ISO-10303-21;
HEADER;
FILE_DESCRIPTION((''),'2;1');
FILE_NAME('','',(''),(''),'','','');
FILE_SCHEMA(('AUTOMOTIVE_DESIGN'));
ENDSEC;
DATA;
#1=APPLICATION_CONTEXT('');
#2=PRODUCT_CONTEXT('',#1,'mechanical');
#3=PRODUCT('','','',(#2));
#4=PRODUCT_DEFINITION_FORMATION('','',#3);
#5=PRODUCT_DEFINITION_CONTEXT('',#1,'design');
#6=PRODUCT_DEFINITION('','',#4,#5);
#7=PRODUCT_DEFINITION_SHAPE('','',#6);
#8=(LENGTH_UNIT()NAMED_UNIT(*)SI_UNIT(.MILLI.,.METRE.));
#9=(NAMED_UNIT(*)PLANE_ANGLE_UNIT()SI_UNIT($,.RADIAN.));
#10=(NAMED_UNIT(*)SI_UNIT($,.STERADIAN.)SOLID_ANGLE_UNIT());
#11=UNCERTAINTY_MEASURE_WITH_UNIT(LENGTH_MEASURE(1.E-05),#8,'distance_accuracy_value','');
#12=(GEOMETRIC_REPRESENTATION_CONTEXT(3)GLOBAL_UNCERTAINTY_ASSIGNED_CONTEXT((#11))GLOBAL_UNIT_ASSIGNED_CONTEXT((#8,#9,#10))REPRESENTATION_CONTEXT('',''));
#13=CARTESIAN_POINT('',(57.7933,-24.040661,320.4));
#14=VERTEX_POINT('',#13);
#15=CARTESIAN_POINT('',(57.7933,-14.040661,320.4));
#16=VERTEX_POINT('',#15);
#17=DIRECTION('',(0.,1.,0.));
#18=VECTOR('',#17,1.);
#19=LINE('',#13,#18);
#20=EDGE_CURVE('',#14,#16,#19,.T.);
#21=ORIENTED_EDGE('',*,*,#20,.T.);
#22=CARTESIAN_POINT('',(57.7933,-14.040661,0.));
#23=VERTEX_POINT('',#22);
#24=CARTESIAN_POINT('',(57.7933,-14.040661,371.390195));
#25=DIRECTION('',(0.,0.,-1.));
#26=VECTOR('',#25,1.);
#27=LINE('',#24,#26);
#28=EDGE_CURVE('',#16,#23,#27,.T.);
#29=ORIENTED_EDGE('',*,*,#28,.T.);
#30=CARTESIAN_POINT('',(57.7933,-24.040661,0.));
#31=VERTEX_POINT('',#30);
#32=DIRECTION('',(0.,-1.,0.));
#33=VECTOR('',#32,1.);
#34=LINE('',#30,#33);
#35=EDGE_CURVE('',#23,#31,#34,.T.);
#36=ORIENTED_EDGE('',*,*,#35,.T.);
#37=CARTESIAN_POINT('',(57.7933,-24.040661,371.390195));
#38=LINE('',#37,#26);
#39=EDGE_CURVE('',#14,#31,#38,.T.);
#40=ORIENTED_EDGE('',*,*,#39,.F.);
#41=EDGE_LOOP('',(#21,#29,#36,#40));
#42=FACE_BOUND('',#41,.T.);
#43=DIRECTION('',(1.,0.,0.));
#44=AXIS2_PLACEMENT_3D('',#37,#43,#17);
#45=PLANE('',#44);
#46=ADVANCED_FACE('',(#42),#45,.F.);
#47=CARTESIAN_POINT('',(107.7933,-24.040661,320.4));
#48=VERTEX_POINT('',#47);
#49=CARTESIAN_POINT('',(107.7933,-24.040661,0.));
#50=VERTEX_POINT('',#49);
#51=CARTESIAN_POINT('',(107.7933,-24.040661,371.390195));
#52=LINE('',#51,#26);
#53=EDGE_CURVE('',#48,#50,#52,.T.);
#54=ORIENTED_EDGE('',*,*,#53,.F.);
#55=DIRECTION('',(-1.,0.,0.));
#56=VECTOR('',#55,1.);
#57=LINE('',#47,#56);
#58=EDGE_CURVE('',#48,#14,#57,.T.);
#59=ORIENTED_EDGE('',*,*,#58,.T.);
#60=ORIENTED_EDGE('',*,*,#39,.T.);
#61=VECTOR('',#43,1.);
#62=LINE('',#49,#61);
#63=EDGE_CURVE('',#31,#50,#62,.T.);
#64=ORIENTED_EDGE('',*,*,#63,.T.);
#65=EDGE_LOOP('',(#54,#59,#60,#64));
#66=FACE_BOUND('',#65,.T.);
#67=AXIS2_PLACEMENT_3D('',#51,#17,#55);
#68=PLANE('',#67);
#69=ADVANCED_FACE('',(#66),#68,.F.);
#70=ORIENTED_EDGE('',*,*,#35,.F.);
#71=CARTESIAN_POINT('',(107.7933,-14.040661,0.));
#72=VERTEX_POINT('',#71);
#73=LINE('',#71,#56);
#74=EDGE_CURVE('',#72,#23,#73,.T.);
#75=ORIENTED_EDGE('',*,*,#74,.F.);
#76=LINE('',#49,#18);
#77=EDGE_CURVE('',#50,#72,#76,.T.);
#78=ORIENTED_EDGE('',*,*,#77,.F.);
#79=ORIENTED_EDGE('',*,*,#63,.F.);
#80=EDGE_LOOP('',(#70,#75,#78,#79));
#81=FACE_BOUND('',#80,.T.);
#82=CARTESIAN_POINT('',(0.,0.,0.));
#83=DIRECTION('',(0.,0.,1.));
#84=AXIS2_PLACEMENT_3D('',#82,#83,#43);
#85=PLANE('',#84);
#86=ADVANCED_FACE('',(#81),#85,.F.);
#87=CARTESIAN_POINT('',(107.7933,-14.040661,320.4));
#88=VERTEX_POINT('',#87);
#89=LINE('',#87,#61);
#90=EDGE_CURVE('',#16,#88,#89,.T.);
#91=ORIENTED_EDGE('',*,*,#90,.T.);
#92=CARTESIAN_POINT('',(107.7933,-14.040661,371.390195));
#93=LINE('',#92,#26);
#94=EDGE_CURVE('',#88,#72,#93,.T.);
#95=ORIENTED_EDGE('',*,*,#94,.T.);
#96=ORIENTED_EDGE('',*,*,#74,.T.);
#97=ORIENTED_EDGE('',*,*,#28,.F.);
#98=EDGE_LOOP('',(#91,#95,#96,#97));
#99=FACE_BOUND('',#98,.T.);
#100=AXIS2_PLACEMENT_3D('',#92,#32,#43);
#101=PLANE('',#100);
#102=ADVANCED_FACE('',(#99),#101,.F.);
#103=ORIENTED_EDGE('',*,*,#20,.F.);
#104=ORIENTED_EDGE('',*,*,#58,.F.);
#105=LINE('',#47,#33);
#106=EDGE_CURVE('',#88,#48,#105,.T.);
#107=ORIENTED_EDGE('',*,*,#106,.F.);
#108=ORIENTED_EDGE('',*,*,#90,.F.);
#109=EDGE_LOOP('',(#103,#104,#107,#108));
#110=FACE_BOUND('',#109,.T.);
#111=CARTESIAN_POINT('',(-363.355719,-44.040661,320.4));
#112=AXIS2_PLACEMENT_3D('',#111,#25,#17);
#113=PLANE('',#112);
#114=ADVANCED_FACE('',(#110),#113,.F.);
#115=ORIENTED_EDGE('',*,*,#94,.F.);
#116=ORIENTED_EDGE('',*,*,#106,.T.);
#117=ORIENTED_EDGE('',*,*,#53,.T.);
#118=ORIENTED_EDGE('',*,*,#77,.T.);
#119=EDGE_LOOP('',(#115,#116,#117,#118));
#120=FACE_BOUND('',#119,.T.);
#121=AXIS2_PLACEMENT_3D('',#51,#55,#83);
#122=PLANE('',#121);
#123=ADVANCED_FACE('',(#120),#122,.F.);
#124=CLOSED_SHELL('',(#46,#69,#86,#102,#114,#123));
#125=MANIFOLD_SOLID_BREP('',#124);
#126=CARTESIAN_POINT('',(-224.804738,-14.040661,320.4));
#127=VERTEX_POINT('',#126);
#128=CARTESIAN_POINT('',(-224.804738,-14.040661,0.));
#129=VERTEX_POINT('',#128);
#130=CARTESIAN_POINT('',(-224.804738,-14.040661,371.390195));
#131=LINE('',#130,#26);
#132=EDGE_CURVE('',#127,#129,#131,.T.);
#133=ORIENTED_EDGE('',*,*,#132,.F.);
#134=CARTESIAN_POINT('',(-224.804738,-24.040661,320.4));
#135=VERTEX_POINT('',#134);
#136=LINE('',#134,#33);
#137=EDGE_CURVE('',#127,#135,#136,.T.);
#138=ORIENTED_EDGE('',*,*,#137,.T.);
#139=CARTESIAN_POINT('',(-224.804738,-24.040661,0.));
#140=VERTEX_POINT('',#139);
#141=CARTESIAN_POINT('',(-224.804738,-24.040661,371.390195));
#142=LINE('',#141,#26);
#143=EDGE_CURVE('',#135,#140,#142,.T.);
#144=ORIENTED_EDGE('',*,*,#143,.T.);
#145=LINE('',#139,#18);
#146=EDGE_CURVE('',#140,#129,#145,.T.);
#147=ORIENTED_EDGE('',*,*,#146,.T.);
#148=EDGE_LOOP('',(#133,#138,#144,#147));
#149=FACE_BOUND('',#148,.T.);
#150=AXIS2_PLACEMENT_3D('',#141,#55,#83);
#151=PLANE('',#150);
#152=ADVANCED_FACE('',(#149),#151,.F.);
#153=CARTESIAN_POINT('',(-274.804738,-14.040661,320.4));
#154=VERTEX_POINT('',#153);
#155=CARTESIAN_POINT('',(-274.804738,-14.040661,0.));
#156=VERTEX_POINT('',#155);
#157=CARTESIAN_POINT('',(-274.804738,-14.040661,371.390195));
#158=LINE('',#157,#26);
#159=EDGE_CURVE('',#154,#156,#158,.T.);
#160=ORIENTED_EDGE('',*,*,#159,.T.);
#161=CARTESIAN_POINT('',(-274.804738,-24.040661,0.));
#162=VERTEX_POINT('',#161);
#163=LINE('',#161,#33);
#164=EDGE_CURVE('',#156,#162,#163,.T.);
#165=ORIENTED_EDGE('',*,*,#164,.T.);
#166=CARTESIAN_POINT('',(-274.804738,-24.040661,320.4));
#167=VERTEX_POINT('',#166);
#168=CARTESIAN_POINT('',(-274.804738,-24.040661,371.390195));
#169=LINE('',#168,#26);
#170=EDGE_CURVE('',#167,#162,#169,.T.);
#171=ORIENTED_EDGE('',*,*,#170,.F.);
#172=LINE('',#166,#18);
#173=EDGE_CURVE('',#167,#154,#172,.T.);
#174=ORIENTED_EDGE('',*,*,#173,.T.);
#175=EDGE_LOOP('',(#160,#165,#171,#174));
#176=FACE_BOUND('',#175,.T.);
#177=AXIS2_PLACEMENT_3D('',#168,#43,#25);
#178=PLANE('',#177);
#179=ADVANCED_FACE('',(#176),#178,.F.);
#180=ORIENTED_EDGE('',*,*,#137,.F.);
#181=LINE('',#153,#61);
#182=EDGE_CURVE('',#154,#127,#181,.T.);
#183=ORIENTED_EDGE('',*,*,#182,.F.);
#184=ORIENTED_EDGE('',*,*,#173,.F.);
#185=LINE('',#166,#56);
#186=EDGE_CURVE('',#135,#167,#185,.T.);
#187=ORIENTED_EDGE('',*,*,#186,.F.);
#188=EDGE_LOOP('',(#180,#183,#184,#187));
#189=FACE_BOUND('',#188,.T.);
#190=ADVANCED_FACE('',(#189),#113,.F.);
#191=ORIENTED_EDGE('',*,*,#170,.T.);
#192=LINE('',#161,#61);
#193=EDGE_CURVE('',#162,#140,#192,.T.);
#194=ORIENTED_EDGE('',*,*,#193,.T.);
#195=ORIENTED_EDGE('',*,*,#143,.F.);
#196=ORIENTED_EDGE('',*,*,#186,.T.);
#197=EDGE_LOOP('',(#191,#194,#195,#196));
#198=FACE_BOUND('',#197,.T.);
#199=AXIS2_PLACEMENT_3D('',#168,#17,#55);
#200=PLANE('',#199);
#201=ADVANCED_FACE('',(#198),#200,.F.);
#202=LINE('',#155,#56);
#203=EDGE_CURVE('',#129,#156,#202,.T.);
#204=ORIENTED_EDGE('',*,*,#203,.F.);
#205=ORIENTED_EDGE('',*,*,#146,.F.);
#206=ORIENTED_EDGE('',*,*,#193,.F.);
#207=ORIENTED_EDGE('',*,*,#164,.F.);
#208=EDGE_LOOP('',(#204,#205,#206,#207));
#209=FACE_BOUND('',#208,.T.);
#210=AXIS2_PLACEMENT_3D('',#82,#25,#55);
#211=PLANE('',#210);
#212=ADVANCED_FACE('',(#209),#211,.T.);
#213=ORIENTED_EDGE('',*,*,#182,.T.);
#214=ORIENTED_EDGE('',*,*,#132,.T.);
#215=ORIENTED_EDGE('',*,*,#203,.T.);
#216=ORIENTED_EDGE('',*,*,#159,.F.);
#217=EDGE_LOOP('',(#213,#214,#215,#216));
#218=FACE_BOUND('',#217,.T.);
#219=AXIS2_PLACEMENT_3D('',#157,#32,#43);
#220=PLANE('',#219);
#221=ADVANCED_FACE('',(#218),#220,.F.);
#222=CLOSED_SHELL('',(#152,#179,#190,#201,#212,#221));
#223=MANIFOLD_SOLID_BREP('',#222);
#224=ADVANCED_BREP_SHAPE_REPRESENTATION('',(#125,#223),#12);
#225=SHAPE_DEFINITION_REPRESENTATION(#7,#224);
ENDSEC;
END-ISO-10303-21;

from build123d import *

# Parameters (mm, degrees)
EXTRUDE_1_OUTLINE_W = 50
EXTRUDE_1_OUTLINE_H = 10
EXTRUDE_1_DEPTH     = 320.4


# Read off the part's stored shape, not the designer's step: 填料-伸長1
with BuildPart() as part:
    # 填料-伸長1 outline → 填料-伸長1 (new body)
    with BuildSketch(Plane.XY):
        with Locations((-249.804738154, -19.040660553)):
            Rectangle(EXTRUDE_1_OUTLINE_W, EXTRUDE_1_OUTLINE_H)
        with Locations((82.793299874, -19.040660553)):
            Rectangle(EXTRUDE_1_OUTLINE_W, EXTRUDE_1_OUTLINE_H)
    extrude(amount=EXTRUDE_1_DEPTH)


solid = part.part
